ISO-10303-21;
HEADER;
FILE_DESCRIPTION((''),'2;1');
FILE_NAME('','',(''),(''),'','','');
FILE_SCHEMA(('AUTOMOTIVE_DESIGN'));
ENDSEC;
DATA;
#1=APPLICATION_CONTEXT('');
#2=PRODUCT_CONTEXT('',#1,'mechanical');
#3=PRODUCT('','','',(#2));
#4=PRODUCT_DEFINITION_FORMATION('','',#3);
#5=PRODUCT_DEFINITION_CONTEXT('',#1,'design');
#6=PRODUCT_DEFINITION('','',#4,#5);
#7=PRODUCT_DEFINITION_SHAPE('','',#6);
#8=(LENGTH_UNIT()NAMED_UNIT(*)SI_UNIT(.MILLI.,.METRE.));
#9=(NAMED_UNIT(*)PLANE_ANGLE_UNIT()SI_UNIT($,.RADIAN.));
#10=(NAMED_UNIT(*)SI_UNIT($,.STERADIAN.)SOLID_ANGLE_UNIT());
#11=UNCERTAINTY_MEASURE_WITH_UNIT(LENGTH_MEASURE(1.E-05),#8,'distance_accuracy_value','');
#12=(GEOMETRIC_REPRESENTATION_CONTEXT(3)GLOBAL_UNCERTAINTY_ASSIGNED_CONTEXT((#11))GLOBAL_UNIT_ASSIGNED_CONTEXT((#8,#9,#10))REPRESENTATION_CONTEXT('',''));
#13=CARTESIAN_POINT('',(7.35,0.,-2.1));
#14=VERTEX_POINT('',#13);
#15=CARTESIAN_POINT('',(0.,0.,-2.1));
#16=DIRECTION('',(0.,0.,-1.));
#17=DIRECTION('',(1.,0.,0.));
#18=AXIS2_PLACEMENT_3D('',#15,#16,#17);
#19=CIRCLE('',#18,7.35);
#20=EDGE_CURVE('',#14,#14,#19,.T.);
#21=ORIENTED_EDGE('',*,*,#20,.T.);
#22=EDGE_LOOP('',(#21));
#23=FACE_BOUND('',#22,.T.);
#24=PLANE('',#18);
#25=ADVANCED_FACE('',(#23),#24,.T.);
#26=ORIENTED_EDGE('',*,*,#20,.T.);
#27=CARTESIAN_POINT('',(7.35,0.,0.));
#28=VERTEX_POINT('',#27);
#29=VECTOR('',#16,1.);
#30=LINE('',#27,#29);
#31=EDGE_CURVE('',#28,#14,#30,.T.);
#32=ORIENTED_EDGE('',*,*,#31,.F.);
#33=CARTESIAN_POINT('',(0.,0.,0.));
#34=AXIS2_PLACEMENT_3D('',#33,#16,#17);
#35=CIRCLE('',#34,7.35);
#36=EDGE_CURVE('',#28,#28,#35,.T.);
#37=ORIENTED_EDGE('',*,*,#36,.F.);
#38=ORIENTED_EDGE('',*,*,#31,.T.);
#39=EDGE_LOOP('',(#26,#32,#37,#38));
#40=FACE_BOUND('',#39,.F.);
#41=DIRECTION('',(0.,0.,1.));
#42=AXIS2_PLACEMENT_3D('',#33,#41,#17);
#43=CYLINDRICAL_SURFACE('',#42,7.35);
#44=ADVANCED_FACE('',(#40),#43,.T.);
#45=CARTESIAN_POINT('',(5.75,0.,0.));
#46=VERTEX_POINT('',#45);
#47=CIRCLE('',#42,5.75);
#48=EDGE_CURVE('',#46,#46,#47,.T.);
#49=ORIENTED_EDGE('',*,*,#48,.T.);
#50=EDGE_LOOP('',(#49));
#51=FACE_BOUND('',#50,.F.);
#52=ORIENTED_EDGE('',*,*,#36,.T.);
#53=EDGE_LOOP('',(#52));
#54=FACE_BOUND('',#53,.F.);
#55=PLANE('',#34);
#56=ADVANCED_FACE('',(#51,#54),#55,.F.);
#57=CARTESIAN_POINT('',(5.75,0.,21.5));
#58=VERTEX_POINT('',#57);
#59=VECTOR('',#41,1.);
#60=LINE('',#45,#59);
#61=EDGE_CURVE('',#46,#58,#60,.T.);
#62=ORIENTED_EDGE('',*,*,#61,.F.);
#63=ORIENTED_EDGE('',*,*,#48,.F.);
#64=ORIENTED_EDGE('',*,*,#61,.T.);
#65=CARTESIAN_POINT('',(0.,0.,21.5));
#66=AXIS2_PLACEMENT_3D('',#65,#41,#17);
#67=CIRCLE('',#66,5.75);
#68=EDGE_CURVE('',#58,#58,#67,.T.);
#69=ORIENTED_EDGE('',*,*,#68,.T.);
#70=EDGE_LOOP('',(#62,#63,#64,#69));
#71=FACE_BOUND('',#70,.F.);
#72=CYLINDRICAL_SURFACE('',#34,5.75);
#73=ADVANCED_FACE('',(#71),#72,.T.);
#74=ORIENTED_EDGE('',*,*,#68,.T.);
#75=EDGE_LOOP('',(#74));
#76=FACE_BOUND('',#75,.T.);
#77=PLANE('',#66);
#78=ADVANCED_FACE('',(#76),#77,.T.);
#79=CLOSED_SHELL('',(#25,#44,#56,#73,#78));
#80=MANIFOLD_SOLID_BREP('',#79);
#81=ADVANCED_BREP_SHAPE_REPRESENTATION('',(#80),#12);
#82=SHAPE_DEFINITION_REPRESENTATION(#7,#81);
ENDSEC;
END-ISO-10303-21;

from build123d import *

# Parameters (mm, degrees)
F0_R     = 5.75
F1_DEPTH = 21.5
F2_R     = 7.35
F2_R_2   = 5.75
F3_DEPTH = 2.1


with BuildPart() as f1:
    # F0 (on Top) → F1 (new body)
    with BuildSketch(Plane.XY):
        Circle(F0_R)
    extrude(amount=F1_DEPTH)

    # F2 (on face) → F3 (join)
    with BuildSketch(Plane(origin=(0, 0, 0), x_dir=(1, 0, 0), z_dir=(0, 0, -1))):
        Circle(F2_R)
        Circle(F2_R_2, mode=Mode.SUBTRACT)
        Circle(F2_R_2)
    extrude(amount=F3_DEPTH)


solid = f1.part
